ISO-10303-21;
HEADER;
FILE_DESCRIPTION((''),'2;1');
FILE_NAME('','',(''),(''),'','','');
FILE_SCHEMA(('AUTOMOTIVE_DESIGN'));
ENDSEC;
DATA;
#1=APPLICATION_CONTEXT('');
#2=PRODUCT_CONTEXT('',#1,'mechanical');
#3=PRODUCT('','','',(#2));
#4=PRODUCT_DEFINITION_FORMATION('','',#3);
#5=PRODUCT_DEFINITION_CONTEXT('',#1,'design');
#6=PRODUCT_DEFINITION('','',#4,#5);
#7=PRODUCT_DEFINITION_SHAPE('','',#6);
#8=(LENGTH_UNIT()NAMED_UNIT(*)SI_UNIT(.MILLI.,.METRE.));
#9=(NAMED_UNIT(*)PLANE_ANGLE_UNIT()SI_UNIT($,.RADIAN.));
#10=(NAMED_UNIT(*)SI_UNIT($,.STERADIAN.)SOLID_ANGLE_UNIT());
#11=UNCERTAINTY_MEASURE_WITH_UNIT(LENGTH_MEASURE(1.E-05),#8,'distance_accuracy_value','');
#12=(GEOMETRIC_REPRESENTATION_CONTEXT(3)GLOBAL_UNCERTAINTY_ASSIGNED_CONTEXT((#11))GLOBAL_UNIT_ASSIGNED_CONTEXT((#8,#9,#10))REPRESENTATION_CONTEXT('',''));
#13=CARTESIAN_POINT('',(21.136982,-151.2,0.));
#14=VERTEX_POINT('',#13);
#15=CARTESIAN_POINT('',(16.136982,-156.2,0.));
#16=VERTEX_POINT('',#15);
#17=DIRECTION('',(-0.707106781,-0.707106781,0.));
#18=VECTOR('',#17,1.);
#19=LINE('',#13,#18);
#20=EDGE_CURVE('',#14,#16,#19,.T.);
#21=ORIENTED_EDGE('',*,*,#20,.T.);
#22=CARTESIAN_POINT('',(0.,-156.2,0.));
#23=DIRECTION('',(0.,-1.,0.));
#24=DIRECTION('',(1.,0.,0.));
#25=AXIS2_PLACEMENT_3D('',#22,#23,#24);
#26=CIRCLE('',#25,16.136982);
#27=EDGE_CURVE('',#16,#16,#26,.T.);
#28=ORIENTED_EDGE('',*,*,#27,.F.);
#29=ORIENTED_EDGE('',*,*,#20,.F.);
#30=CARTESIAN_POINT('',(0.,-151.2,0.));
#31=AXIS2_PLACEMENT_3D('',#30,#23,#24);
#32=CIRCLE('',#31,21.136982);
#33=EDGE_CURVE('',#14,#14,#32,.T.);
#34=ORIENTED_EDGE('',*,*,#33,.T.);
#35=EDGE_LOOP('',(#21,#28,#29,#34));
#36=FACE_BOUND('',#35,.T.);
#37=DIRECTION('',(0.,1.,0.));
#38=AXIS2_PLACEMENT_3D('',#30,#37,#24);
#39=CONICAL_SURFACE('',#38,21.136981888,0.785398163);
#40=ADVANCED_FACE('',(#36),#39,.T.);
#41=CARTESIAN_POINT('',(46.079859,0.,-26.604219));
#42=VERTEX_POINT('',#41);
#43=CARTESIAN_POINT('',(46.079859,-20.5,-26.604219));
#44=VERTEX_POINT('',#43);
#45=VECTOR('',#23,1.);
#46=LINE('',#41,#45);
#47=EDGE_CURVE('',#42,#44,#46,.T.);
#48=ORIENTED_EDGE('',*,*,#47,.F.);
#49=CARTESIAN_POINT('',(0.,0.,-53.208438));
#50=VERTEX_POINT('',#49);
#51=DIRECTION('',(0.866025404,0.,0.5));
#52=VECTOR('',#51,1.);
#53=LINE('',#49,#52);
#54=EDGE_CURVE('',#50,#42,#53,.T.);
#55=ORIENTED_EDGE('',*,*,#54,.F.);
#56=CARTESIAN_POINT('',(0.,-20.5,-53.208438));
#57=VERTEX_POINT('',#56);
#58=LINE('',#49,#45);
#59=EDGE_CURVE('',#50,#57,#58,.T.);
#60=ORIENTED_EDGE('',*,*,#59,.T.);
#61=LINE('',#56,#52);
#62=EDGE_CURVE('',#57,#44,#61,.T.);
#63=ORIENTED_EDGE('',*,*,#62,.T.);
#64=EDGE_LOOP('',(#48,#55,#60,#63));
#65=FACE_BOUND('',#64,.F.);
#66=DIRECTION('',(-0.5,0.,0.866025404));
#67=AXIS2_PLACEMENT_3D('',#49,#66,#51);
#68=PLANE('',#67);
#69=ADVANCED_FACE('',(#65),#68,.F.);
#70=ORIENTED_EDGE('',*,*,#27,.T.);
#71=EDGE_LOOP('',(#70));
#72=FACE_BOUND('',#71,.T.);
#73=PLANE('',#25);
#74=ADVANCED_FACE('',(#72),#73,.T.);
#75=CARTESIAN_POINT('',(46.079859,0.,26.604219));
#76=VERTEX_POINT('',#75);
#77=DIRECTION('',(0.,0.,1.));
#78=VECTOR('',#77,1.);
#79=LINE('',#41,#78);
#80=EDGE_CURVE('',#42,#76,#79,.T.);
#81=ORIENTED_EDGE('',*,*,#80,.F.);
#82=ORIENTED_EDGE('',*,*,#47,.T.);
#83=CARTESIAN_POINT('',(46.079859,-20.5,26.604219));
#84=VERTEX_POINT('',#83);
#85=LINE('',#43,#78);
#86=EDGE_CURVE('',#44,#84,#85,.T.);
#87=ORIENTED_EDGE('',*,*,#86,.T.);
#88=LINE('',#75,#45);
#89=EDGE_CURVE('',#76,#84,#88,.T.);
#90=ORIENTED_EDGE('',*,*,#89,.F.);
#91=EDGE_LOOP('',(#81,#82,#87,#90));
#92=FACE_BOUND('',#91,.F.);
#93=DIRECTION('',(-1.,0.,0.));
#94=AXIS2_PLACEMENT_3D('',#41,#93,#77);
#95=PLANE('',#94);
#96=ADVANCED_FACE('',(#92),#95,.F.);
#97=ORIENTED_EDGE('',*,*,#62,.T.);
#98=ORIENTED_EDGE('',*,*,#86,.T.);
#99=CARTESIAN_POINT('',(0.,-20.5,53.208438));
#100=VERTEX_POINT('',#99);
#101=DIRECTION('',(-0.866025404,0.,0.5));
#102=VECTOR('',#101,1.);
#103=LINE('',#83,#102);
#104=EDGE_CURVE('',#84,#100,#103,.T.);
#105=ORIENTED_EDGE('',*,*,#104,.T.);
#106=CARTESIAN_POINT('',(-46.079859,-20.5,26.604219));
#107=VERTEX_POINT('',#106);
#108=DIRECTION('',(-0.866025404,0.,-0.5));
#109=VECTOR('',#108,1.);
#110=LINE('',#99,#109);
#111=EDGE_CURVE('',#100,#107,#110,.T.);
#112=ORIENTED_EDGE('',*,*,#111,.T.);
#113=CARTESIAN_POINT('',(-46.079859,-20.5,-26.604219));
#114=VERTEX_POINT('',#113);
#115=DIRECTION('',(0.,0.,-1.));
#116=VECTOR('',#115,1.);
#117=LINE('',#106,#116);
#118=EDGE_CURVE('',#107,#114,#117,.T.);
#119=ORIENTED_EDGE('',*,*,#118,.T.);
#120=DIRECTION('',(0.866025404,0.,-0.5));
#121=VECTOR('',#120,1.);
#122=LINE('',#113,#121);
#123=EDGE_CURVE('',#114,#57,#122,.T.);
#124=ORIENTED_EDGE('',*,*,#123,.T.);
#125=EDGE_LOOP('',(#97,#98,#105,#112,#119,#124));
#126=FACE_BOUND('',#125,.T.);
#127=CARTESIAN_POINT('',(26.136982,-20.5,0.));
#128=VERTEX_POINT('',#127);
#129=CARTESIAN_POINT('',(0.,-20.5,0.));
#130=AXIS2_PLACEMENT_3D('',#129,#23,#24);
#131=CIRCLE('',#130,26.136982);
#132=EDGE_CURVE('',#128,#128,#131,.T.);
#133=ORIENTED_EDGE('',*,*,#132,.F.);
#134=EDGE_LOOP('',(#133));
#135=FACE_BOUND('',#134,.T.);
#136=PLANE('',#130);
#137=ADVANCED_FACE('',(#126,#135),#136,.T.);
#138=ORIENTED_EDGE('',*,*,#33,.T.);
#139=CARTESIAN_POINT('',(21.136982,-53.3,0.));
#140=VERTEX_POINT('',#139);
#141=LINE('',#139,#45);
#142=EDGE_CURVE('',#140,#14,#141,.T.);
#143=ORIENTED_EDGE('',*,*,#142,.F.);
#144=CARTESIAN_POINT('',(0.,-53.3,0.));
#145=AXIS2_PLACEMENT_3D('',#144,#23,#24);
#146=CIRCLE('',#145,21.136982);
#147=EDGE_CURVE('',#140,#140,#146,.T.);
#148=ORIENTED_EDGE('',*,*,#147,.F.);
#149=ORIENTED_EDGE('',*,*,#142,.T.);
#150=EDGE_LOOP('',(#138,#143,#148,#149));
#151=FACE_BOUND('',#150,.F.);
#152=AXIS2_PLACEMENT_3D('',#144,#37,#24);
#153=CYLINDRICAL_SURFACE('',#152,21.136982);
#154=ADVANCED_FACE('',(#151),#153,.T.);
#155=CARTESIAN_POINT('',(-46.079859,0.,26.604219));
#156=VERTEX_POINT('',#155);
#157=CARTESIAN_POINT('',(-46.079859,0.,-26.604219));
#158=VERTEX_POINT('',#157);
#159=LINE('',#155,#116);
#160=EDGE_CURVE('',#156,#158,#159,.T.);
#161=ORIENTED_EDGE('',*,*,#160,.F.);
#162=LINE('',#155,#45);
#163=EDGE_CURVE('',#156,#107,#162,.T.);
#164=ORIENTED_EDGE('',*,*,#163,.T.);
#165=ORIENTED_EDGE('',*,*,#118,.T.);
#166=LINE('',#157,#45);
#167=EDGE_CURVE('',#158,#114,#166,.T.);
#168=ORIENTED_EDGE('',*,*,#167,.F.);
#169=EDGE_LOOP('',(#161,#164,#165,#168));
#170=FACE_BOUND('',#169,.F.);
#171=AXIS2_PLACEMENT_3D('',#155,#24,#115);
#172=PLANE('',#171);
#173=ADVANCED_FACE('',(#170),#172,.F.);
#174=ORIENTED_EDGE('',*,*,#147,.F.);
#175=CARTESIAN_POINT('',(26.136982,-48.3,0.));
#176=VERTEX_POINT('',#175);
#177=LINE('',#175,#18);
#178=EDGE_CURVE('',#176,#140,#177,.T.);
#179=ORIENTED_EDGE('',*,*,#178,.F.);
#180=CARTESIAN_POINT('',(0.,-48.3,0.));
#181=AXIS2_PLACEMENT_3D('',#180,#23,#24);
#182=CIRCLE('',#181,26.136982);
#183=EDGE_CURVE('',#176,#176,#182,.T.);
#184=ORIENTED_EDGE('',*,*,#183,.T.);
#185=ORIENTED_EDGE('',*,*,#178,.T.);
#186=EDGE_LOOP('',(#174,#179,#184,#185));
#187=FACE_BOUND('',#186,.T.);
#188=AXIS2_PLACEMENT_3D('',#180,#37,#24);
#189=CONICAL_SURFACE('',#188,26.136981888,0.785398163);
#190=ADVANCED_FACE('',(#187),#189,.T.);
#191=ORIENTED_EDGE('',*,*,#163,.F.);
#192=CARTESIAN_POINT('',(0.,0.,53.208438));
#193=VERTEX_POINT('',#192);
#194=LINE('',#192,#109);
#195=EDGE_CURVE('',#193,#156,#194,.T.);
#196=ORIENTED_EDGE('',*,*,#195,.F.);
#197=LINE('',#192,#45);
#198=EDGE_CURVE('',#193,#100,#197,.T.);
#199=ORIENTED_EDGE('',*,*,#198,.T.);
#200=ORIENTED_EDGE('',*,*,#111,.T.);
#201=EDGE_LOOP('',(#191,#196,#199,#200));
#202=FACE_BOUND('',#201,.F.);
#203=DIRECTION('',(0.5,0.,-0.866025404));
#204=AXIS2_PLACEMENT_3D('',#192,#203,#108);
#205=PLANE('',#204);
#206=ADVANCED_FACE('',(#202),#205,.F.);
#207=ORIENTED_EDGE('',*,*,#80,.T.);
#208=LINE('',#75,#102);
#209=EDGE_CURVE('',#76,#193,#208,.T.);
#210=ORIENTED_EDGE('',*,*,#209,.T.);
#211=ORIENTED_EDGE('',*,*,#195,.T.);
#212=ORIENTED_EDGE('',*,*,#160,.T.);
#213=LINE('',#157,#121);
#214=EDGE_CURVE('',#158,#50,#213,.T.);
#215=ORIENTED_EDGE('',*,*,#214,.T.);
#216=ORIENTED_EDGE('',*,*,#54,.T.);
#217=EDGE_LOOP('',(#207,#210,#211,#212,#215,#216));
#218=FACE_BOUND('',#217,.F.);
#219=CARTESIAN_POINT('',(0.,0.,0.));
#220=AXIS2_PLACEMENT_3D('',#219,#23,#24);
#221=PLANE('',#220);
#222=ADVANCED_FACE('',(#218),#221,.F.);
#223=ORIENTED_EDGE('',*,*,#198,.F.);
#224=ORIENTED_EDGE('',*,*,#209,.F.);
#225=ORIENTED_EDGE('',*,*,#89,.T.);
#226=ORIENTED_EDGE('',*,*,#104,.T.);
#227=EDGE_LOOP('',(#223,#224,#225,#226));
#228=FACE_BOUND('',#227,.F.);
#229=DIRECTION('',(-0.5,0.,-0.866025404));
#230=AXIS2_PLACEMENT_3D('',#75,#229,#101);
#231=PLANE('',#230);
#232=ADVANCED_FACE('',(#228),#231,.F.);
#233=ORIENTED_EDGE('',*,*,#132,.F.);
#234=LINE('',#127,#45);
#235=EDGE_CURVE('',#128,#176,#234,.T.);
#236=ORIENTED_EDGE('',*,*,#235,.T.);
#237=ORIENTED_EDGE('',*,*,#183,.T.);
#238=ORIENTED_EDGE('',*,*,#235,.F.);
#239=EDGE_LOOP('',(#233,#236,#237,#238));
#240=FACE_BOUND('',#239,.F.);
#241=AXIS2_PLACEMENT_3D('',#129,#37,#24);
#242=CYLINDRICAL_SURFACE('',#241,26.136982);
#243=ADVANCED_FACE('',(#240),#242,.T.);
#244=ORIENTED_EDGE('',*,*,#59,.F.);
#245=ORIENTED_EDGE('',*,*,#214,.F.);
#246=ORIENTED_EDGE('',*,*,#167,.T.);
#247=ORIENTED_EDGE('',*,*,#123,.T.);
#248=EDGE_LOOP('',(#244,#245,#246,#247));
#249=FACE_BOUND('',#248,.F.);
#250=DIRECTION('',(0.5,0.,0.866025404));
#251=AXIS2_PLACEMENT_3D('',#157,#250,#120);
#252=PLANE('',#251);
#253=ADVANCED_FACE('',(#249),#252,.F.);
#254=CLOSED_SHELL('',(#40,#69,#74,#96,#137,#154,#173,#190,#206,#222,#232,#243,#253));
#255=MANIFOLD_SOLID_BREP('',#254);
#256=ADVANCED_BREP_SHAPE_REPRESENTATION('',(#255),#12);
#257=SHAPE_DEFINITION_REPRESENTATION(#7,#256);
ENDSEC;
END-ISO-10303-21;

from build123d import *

# Parameters (mm, degrees)
F1_DEPTH = 20.5
F2_R     = 26.136981888
F3_DEPTH = 32.8
F4_SIZE  = 5
F5_DEPTH = 102.9
F6_SIZE  = 5


with BuildPart() as f1:
    # F0 (on Front) → F1 (new body)
    with BuildSketch(Plane.XZ):
        Polygon((46.0798591375, -26.6042190773), (46.0798591375, 26.6042190773), (0, 53.2084381546), (-46.0798591375, 26.6042190773), (-46.0798591375, -26.6042190773), (0, -53.2084381546), align=None)
    extrude(amount=F1_DEPTH)

    # F2 (on face) → F3 (join)
    with BuildSketch(Plane.XZ.offset(20.5)):
        Circle(F2_R)
    extrude(amount=F3_DEPTH)

    # F4
    f4_edges = [f1.edges().sort_by_distance(p)[0] for p in [
        (-26.136982, -53.3, 0),
    ]]
    chamfer(f4_edges, length=F4_SIZE)

    # F5 (add): a face of the model
    f5_faces = [f1.faces().sort_by_distance(p)[0] for p in [
        (0, -53.3, 0),
    ]]
    extrude(f5_faces, amount=F5_DEPTH)

    # F6
    f6_edges = [f1.edges().sort_by_distance(p)[0] for p in [
        (-21.136982, -156.2, 0),
    ]]
    chamfer(f6_edges, length=F6_SIZE)


solid = f1.part
